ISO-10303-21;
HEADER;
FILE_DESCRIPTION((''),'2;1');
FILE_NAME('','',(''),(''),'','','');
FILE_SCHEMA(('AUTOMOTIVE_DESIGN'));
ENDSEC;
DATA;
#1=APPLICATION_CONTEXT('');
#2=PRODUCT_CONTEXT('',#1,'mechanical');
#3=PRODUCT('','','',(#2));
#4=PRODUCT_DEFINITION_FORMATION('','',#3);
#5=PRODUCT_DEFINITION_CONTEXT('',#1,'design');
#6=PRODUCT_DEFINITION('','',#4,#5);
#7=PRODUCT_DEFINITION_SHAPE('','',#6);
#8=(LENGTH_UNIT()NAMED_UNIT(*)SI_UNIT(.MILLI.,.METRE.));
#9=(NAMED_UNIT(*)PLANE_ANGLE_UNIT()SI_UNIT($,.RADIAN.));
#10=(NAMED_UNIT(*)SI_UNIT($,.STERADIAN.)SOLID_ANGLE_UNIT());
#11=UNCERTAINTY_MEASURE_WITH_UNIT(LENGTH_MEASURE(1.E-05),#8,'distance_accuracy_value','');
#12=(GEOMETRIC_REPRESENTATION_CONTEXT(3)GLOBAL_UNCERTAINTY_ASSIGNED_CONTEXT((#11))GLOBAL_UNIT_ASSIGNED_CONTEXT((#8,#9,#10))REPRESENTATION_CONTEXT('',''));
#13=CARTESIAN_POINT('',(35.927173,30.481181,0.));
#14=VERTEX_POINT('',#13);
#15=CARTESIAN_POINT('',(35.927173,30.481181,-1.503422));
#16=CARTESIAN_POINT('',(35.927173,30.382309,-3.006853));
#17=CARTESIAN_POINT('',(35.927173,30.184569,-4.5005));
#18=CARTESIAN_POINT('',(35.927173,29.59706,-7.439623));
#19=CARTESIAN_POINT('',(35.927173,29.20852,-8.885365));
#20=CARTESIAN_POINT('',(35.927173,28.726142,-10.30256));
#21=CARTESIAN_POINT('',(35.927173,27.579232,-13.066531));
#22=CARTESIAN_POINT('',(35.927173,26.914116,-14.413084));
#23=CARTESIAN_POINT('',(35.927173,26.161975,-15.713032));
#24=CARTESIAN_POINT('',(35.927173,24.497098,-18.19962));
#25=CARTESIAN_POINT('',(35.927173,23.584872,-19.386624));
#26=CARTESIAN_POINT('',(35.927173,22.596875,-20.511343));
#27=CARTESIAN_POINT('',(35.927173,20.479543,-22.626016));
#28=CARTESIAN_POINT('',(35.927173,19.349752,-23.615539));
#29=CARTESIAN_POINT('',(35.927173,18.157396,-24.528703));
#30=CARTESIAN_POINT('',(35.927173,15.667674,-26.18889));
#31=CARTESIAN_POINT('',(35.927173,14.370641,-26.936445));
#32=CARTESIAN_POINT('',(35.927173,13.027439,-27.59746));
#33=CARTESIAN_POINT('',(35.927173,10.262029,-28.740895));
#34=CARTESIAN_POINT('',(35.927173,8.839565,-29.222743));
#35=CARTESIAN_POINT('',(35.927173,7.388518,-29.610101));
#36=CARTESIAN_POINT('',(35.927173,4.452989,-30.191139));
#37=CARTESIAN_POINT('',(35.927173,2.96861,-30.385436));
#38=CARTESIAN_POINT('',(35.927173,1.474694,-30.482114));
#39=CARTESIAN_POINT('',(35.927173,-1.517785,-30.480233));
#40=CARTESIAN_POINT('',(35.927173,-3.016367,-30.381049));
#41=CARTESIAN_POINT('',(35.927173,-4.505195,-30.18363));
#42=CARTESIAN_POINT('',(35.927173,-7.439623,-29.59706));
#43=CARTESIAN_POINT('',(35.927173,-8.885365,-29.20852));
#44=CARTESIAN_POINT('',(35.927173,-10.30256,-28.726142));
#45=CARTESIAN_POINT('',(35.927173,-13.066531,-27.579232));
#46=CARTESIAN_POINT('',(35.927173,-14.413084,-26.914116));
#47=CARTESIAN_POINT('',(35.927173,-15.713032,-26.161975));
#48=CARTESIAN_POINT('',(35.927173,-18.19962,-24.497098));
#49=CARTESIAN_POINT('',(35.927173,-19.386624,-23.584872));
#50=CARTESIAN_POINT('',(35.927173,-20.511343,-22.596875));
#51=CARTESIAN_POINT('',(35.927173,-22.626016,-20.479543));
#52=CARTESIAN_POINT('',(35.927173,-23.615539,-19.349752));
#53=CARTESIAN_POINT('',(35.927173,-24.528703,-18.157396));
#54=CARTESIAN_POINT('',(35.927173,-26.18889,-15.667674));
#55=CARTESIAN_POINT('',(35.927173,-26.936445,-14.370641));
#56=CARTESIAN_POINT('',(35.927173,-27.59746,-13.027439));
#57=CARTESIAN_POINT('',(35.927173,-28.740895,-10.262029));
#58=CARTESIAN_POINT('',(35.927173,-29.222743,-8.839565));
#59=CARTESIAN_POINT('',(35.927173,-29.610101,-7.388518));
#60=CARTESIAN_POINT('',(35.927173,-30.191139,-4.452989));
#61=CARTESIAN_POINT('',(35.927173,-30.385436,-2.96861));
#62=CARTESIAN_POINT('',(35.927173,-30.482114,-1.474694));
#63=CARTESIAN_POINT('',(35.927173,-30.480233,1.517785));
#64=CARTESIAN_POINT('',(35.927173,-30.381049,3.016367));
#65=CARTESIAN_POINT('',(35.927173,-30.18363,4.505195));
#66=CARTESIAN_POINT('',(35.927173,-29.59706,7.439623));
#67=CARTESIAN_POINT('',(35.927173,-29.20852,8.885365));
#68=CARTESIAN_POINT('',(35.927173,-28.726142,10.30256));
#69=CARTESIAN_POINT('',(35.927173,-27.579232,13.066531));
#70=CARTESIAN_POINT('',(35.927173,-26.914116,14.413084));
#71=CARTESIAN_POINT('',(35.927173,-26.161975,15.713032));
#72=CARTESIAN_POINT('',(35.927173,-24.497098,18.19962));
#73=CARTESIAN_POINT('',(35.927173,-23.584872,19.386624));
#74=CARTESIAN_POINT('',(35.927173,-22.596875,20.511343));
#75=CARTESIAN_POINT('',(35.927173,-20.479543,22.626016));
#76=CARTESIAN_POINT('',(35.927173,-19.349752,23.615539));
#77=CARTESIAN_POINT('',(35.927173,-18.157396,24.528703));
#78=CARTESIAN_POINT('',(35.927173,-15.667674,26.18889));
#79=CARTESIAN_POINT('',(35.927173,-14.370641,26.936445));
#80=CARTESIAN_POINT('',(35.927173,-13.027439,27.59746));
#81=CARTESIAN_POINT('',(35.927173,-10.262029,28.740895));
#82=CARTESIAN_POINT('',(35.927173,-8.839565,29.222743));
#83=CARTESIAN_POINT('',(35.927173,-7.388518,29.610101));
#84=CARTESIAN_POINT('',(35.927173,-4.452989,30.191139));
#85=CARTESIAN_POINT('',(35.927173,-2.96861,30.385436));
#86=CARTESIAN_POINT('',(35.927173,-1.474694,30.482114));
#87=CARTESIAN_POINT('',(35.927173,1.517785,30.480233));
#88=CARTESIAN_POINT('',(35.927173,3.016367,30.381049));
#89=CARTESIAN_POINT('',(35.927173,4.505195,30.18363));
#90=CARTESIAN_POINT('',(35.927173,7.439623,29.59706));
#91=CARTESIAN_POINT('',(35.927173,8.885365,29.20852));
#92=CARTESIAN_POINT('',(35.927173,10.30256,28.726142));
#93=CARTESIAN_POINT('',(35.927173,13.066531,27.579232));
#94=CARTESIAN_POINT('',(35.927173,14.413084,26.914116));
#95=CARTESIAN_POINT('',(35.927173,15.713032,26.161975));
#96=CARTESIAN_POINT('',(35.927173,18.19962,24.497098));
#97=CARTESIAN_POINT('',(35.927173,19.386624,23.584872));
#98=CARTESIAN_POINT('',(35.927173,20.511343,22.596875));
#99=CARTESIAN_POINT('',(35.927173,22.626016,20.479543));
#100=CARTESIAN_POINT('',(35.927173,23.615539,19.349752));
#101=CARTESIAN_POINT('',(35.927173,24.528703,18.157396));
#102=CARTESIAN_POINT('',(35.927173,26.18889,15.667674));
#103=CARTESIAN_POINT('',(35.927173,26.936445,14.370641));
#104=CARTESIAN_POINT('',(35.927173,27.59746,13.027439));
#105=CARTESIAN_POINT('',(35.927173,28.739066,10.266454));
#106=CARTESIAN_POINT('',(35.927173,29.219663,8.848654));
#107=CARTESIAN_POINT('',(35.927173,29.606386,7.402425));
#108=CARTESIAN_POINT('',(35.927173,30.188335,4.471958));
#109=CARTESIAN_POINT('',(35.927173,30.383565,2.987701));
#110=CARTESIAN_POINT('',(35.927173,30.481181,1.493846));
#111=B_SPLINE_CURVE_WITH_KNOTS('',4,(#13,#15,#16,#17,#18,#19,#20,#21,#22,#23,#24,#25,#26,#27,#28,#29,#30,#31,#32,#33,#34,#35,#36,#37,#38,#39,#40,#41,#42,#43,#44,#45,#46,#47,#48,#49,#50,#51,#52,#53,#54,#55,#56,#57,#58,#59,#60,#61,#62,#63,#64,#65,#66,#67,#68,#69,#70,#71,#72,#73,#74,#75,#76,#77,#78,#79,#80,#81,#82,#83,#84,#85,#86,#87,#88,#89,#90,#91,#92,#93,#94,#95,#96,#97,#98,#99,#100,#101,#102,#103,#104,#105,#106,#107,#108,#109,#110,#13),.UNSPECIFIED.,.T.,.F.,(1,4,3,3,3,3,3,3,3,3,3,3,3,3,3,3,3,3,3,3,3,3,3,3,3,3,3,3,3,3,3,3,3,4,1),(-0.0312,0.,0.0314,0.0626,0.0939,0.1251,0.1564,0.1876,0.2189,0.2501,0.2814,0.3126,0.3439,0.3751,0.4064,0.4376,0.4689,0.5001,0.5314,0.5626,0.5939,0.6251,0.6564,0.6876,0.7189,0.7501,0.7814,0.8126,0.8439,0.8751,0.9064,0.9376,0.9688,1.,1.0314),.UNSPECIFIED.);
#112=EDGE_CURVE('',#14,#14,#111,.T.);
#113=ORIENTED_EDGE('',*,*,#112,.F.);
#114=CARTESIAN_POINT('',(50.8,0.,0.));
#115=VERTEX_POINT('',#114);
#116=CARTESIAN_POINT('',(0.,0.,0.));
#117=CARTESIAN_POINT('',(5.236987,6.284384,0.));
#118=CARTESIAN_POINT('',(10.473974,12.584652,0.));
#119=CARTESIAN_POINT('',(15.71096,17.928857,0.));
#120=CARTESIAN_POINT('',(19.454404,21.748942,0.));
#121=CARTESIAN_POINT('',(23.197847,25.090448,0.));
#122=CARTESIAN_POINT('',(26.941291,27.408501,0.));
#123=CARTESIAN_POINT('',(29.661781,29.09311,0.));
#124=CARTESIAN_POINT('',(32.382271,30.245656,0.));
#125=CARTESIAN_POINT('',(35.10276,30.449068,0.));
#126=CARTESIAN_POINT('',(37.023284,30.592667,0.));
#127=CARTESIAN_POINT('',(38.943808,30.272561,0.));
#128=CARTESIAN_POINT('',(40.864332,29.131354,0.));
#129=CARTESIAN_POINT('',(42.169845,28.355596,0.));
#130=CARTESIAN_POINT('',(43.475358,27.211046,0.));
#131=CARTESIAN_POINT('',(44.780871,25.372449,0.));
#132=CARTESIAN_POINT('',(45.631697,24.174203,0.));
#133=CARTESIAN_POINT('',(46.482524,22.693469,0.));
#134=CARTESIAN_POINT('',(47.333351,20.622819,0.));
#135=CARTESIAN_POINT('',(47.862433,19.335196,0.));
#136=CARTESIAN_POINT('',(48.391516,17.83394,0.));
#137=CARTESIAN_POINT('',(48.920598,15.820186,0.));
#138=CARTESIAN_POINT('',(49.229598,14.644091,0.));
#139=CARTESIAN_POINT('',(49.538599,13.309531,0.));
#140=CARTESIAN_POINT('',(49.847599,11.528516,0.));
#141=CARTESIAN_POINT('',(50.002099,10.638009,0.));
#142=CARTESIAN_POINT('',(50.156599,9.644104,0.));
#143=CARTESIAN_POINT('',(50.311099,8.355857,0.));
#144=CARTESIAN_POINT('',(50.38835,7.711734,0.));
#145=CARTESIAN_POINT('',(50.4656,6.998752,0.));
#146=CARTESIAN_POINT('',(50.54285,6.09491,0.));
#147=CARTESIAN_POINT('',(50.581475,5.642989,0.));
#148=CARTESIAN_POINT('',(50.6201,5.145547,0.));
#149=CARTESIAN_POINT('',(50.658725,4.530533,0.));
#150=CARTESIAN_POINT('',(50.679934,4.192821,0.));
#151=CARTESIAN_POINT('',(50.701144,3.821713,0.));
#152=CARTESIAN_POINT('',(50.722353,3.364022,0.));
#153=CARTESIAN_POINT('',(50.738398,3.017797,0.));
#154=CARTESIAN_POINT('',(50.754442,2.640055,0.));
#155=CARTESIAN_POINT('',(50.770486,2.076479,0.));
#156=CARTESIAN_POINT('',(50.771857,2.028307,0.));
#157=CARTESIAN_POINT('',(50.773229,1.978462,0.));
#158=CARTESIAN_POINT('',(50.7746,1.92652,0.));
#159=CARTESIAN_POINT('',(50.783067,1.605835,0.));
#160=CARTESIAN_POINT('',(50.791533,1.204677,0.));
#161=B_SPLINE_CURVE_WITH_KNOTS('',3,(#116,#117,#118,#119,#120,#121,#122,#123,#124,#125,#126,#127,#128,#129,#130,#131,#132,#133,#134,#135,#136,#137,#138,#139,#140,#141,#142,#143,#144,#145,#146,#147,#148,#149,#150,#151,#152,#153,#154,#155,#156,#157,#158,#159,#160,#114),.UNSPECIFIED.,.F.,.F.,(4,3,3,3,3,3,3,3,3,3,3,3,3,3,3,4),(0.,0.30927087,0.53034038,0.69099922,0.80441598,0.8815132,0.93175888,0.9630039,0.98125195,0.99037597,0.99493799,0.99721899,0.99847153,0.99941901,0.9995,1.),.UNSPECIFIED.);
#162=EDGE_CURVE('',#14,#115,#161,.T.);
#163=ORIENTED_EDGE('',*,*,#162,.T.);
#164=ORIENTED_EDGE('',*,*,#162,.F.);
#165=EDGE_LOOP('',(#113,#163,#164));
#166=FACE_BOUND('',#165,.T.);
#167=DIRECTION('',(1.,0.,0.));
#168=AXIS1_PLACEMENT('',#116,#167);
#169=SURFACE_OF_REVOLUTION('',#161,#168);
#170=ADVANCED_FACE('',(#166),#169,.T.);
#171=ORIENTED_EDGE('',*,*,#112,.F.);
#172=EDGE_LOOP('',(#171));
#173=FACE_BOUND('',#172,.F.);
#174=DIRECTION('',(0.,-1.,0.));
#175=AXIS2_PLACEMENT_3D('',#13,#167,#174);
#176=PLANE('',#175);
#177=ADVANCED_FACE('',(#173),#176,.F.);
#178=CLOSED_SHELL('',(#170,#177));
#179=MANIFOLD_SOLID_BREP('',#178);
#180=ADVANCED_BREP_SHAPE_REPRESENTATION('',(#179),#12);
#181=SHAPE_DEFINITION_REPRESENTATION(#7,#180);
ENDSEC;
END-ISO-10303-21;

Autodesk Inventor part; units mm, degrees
ref_plane "YZ Plane" through (0, 0, 0) normal (1, 0, 0) x (0, 1, 0)
ref_plane "XZ Plane" through (0, 0, 0) normal (0, 1, 0) x (-1, 0, 0)
sketch "Sketch1" plane through (0, 0, 0) normal (0, 0, 1) x (1, 0, 0)
  spline S0 degree 3 poles (0, 0) (5.236987, 6.284384) (10.473974, 12.584652) (15.71096, 17.928857) (19.454404, 21.748942) (23.197847, 25.090448) (26.941291, 27.408501) (29.661781, 29.09311) (32.382271, 30.245656) (35.10276, 30.449068) (37.023284, 30.592667) (38.943808, 30.272561) (40.864332, 29.131354) (42.169845, 28.355596) (43.475358, 27.211046) (44.780871, 25.372449) (45.631697, 24.174203) (46.482524, 22.693469) (47.333351, 20.622819) (47.862433, 19.335196) (48.391516, 17.83394) (48.920598, 15.820186) (49.229598, 14.644091) (49.538599, 13.309531) (49.847599, 11.528516) (50.002099, 10.638009) (50.156599, 9.644104) (50.311099, 8.355857) (50.38835, 7.711734) (50.4656, 6.998752) (50.54285, 6.09491) (50.581475, 5.642989) (50.6201, 5.145547) (50.658725, 4.530533) (50.679934, 4.192821) (50.701144, 3.821713) (50.722353, 3.364022) (50.738398, 3.017797) (50.754442, 2.640055) (50.770486, 2.076479) (50.771857, 2.028307) (50.773229, 1.978462) (50.7746, 1.92652) (50.783067, 1.605835) (50.791533, 1.204677) (50.8, 0) knots 0 0 0 0 0.30927087 0.30927087 0.30927087 0.53034038 0.53034038 0.53034038 0.69099922 0.69099922 0.69099922 0.80441598 0.80441598 0.80441598 0.8815132 0.8815132 0.8815132 0.93175888 0.93175888 0.93175888 0.9630039 0.9630039 0.9630039 0.98125195 0.98125195 0.98125195 0.99037597 0.99037597 0.99037597 0.99493799 0.99493799 0.99493799 0.99721899 0.99721899 0.99721899 0.99847153 0.99847153 0.99847153 0.99941901 0.99941901 0.99941901 0.9995 0.9995 0.9995 1 1 1 1
  line L0 (0, 0) -> (50.8, 0)
revolve "Revolution1" add sketch "Sketch1" angle 360 about axis through (0, 0, 0) along (1, 0, 0)
sketch "Sketch2" plane through (0, 0, 0) normal (0, 0, 1) x (1, 0, 0)
  spline S0 degree 3 poles (50.8, 0) (50.791533, 1.204677) (50.783067, 1.605835) (50.7746, 1.92652) (50.773229, 1.978462) (50.771857, 2.028307) (50.770486, 2.076479) (50.754442, 2.640055) (50.738398, 3.017797) (50.722353, 3.364022) (50.701144, 3.821713) (50.679934, 4.192821) (50.658725, 4.530533) (50.6201, 5.145547) (50.581475, 5.642989) (50.54285, 6.09491) (50.4656, 6.998752) (50.38835, 7.711734) (50.311099, 8.355857) (50.156599, 9.644104) (50.002099, 10.638009) (49.847599, 11.528516) (49.538599, 13.309531) (49.229598, 14.644091) (48.920598, 15.820186) (48.391516, 17.83394) (47.862433, 19.335196) (47.333351, 20.622819) (46.482524, 22.693469) (45.631697, 24.174203) (44.780871, 25.372449) (43.475358, 27.211046) (42.169845, 28.355596) (40.864332, 29.131354) (38.943808, 30.272561) (37.023284, 30.592667) (35.10276, 30.449068) (32.382271, 30.245656) (29.661781, 29.09311) (26.941291, 27.408501) (23.197847, 25.090448) (19.454404, 21.748942) (15.71096, 17.928857) (10.473974, 12.584652) (5.236987, 6.284384) (0, 0) knots -2 -2 -2 -2 -1.999 -1.999 -1.999 -1.99883803 -1.99883803 -1.99883803 -1.99694305 -1.99694305 -1.99694305 -1.99443799 -1.99443799 -1.99443799 -1.98987597 -1.98987597 -1.98987597 -1.98075195 -1.98075195 -1.98075195 -1.9625039 -1.9625039 -1.9625039 -1.92600779 -1.92600779 -1.92600779 -1.86351776 -1.86351776 -1.86351776 -1.7630264 -1.7630264 -1.7630264 -1.60883195 -1.60883195 -1.60883195 -1.38199844 -1.38199844 -1.38199844 -1.06068075 -1.06068075 -1.06068075 -0.61854174 -0.61854174 -0.61854174 0 0 0 0
  line L0 (35.927173, 30.481181) -> (35.927173, -30.565071)
  line L1 (35.927173, -30.565071) -> (67.301693, -30.565071)
  line L2 (67.301693, -30.565071) -> (67.301693, 30.481181)
  line L3 (67.301693, 30.481181) -> (35.927173, 30.481181)
  line L4 (35.927173, 30.481181) -> (-48.061367, 30.481181)
  line L5 (-48.061367, 30.481181) -> (-48.061367, -59.26282)
  line L6 (-48.061367, -59.26282) -> (35.927173, -59.26282)
  line L7 (35.927173, -59.26282) -> (35.927173, 30.481181)
  point P0 (35.927173, -30.565071)
extrude "Extrusion1" cut sketch "Sketch2" along normal mid plane 127 contours L0 L7 L6 L5 L4
properties part number "test spin toy_3DPrint"
